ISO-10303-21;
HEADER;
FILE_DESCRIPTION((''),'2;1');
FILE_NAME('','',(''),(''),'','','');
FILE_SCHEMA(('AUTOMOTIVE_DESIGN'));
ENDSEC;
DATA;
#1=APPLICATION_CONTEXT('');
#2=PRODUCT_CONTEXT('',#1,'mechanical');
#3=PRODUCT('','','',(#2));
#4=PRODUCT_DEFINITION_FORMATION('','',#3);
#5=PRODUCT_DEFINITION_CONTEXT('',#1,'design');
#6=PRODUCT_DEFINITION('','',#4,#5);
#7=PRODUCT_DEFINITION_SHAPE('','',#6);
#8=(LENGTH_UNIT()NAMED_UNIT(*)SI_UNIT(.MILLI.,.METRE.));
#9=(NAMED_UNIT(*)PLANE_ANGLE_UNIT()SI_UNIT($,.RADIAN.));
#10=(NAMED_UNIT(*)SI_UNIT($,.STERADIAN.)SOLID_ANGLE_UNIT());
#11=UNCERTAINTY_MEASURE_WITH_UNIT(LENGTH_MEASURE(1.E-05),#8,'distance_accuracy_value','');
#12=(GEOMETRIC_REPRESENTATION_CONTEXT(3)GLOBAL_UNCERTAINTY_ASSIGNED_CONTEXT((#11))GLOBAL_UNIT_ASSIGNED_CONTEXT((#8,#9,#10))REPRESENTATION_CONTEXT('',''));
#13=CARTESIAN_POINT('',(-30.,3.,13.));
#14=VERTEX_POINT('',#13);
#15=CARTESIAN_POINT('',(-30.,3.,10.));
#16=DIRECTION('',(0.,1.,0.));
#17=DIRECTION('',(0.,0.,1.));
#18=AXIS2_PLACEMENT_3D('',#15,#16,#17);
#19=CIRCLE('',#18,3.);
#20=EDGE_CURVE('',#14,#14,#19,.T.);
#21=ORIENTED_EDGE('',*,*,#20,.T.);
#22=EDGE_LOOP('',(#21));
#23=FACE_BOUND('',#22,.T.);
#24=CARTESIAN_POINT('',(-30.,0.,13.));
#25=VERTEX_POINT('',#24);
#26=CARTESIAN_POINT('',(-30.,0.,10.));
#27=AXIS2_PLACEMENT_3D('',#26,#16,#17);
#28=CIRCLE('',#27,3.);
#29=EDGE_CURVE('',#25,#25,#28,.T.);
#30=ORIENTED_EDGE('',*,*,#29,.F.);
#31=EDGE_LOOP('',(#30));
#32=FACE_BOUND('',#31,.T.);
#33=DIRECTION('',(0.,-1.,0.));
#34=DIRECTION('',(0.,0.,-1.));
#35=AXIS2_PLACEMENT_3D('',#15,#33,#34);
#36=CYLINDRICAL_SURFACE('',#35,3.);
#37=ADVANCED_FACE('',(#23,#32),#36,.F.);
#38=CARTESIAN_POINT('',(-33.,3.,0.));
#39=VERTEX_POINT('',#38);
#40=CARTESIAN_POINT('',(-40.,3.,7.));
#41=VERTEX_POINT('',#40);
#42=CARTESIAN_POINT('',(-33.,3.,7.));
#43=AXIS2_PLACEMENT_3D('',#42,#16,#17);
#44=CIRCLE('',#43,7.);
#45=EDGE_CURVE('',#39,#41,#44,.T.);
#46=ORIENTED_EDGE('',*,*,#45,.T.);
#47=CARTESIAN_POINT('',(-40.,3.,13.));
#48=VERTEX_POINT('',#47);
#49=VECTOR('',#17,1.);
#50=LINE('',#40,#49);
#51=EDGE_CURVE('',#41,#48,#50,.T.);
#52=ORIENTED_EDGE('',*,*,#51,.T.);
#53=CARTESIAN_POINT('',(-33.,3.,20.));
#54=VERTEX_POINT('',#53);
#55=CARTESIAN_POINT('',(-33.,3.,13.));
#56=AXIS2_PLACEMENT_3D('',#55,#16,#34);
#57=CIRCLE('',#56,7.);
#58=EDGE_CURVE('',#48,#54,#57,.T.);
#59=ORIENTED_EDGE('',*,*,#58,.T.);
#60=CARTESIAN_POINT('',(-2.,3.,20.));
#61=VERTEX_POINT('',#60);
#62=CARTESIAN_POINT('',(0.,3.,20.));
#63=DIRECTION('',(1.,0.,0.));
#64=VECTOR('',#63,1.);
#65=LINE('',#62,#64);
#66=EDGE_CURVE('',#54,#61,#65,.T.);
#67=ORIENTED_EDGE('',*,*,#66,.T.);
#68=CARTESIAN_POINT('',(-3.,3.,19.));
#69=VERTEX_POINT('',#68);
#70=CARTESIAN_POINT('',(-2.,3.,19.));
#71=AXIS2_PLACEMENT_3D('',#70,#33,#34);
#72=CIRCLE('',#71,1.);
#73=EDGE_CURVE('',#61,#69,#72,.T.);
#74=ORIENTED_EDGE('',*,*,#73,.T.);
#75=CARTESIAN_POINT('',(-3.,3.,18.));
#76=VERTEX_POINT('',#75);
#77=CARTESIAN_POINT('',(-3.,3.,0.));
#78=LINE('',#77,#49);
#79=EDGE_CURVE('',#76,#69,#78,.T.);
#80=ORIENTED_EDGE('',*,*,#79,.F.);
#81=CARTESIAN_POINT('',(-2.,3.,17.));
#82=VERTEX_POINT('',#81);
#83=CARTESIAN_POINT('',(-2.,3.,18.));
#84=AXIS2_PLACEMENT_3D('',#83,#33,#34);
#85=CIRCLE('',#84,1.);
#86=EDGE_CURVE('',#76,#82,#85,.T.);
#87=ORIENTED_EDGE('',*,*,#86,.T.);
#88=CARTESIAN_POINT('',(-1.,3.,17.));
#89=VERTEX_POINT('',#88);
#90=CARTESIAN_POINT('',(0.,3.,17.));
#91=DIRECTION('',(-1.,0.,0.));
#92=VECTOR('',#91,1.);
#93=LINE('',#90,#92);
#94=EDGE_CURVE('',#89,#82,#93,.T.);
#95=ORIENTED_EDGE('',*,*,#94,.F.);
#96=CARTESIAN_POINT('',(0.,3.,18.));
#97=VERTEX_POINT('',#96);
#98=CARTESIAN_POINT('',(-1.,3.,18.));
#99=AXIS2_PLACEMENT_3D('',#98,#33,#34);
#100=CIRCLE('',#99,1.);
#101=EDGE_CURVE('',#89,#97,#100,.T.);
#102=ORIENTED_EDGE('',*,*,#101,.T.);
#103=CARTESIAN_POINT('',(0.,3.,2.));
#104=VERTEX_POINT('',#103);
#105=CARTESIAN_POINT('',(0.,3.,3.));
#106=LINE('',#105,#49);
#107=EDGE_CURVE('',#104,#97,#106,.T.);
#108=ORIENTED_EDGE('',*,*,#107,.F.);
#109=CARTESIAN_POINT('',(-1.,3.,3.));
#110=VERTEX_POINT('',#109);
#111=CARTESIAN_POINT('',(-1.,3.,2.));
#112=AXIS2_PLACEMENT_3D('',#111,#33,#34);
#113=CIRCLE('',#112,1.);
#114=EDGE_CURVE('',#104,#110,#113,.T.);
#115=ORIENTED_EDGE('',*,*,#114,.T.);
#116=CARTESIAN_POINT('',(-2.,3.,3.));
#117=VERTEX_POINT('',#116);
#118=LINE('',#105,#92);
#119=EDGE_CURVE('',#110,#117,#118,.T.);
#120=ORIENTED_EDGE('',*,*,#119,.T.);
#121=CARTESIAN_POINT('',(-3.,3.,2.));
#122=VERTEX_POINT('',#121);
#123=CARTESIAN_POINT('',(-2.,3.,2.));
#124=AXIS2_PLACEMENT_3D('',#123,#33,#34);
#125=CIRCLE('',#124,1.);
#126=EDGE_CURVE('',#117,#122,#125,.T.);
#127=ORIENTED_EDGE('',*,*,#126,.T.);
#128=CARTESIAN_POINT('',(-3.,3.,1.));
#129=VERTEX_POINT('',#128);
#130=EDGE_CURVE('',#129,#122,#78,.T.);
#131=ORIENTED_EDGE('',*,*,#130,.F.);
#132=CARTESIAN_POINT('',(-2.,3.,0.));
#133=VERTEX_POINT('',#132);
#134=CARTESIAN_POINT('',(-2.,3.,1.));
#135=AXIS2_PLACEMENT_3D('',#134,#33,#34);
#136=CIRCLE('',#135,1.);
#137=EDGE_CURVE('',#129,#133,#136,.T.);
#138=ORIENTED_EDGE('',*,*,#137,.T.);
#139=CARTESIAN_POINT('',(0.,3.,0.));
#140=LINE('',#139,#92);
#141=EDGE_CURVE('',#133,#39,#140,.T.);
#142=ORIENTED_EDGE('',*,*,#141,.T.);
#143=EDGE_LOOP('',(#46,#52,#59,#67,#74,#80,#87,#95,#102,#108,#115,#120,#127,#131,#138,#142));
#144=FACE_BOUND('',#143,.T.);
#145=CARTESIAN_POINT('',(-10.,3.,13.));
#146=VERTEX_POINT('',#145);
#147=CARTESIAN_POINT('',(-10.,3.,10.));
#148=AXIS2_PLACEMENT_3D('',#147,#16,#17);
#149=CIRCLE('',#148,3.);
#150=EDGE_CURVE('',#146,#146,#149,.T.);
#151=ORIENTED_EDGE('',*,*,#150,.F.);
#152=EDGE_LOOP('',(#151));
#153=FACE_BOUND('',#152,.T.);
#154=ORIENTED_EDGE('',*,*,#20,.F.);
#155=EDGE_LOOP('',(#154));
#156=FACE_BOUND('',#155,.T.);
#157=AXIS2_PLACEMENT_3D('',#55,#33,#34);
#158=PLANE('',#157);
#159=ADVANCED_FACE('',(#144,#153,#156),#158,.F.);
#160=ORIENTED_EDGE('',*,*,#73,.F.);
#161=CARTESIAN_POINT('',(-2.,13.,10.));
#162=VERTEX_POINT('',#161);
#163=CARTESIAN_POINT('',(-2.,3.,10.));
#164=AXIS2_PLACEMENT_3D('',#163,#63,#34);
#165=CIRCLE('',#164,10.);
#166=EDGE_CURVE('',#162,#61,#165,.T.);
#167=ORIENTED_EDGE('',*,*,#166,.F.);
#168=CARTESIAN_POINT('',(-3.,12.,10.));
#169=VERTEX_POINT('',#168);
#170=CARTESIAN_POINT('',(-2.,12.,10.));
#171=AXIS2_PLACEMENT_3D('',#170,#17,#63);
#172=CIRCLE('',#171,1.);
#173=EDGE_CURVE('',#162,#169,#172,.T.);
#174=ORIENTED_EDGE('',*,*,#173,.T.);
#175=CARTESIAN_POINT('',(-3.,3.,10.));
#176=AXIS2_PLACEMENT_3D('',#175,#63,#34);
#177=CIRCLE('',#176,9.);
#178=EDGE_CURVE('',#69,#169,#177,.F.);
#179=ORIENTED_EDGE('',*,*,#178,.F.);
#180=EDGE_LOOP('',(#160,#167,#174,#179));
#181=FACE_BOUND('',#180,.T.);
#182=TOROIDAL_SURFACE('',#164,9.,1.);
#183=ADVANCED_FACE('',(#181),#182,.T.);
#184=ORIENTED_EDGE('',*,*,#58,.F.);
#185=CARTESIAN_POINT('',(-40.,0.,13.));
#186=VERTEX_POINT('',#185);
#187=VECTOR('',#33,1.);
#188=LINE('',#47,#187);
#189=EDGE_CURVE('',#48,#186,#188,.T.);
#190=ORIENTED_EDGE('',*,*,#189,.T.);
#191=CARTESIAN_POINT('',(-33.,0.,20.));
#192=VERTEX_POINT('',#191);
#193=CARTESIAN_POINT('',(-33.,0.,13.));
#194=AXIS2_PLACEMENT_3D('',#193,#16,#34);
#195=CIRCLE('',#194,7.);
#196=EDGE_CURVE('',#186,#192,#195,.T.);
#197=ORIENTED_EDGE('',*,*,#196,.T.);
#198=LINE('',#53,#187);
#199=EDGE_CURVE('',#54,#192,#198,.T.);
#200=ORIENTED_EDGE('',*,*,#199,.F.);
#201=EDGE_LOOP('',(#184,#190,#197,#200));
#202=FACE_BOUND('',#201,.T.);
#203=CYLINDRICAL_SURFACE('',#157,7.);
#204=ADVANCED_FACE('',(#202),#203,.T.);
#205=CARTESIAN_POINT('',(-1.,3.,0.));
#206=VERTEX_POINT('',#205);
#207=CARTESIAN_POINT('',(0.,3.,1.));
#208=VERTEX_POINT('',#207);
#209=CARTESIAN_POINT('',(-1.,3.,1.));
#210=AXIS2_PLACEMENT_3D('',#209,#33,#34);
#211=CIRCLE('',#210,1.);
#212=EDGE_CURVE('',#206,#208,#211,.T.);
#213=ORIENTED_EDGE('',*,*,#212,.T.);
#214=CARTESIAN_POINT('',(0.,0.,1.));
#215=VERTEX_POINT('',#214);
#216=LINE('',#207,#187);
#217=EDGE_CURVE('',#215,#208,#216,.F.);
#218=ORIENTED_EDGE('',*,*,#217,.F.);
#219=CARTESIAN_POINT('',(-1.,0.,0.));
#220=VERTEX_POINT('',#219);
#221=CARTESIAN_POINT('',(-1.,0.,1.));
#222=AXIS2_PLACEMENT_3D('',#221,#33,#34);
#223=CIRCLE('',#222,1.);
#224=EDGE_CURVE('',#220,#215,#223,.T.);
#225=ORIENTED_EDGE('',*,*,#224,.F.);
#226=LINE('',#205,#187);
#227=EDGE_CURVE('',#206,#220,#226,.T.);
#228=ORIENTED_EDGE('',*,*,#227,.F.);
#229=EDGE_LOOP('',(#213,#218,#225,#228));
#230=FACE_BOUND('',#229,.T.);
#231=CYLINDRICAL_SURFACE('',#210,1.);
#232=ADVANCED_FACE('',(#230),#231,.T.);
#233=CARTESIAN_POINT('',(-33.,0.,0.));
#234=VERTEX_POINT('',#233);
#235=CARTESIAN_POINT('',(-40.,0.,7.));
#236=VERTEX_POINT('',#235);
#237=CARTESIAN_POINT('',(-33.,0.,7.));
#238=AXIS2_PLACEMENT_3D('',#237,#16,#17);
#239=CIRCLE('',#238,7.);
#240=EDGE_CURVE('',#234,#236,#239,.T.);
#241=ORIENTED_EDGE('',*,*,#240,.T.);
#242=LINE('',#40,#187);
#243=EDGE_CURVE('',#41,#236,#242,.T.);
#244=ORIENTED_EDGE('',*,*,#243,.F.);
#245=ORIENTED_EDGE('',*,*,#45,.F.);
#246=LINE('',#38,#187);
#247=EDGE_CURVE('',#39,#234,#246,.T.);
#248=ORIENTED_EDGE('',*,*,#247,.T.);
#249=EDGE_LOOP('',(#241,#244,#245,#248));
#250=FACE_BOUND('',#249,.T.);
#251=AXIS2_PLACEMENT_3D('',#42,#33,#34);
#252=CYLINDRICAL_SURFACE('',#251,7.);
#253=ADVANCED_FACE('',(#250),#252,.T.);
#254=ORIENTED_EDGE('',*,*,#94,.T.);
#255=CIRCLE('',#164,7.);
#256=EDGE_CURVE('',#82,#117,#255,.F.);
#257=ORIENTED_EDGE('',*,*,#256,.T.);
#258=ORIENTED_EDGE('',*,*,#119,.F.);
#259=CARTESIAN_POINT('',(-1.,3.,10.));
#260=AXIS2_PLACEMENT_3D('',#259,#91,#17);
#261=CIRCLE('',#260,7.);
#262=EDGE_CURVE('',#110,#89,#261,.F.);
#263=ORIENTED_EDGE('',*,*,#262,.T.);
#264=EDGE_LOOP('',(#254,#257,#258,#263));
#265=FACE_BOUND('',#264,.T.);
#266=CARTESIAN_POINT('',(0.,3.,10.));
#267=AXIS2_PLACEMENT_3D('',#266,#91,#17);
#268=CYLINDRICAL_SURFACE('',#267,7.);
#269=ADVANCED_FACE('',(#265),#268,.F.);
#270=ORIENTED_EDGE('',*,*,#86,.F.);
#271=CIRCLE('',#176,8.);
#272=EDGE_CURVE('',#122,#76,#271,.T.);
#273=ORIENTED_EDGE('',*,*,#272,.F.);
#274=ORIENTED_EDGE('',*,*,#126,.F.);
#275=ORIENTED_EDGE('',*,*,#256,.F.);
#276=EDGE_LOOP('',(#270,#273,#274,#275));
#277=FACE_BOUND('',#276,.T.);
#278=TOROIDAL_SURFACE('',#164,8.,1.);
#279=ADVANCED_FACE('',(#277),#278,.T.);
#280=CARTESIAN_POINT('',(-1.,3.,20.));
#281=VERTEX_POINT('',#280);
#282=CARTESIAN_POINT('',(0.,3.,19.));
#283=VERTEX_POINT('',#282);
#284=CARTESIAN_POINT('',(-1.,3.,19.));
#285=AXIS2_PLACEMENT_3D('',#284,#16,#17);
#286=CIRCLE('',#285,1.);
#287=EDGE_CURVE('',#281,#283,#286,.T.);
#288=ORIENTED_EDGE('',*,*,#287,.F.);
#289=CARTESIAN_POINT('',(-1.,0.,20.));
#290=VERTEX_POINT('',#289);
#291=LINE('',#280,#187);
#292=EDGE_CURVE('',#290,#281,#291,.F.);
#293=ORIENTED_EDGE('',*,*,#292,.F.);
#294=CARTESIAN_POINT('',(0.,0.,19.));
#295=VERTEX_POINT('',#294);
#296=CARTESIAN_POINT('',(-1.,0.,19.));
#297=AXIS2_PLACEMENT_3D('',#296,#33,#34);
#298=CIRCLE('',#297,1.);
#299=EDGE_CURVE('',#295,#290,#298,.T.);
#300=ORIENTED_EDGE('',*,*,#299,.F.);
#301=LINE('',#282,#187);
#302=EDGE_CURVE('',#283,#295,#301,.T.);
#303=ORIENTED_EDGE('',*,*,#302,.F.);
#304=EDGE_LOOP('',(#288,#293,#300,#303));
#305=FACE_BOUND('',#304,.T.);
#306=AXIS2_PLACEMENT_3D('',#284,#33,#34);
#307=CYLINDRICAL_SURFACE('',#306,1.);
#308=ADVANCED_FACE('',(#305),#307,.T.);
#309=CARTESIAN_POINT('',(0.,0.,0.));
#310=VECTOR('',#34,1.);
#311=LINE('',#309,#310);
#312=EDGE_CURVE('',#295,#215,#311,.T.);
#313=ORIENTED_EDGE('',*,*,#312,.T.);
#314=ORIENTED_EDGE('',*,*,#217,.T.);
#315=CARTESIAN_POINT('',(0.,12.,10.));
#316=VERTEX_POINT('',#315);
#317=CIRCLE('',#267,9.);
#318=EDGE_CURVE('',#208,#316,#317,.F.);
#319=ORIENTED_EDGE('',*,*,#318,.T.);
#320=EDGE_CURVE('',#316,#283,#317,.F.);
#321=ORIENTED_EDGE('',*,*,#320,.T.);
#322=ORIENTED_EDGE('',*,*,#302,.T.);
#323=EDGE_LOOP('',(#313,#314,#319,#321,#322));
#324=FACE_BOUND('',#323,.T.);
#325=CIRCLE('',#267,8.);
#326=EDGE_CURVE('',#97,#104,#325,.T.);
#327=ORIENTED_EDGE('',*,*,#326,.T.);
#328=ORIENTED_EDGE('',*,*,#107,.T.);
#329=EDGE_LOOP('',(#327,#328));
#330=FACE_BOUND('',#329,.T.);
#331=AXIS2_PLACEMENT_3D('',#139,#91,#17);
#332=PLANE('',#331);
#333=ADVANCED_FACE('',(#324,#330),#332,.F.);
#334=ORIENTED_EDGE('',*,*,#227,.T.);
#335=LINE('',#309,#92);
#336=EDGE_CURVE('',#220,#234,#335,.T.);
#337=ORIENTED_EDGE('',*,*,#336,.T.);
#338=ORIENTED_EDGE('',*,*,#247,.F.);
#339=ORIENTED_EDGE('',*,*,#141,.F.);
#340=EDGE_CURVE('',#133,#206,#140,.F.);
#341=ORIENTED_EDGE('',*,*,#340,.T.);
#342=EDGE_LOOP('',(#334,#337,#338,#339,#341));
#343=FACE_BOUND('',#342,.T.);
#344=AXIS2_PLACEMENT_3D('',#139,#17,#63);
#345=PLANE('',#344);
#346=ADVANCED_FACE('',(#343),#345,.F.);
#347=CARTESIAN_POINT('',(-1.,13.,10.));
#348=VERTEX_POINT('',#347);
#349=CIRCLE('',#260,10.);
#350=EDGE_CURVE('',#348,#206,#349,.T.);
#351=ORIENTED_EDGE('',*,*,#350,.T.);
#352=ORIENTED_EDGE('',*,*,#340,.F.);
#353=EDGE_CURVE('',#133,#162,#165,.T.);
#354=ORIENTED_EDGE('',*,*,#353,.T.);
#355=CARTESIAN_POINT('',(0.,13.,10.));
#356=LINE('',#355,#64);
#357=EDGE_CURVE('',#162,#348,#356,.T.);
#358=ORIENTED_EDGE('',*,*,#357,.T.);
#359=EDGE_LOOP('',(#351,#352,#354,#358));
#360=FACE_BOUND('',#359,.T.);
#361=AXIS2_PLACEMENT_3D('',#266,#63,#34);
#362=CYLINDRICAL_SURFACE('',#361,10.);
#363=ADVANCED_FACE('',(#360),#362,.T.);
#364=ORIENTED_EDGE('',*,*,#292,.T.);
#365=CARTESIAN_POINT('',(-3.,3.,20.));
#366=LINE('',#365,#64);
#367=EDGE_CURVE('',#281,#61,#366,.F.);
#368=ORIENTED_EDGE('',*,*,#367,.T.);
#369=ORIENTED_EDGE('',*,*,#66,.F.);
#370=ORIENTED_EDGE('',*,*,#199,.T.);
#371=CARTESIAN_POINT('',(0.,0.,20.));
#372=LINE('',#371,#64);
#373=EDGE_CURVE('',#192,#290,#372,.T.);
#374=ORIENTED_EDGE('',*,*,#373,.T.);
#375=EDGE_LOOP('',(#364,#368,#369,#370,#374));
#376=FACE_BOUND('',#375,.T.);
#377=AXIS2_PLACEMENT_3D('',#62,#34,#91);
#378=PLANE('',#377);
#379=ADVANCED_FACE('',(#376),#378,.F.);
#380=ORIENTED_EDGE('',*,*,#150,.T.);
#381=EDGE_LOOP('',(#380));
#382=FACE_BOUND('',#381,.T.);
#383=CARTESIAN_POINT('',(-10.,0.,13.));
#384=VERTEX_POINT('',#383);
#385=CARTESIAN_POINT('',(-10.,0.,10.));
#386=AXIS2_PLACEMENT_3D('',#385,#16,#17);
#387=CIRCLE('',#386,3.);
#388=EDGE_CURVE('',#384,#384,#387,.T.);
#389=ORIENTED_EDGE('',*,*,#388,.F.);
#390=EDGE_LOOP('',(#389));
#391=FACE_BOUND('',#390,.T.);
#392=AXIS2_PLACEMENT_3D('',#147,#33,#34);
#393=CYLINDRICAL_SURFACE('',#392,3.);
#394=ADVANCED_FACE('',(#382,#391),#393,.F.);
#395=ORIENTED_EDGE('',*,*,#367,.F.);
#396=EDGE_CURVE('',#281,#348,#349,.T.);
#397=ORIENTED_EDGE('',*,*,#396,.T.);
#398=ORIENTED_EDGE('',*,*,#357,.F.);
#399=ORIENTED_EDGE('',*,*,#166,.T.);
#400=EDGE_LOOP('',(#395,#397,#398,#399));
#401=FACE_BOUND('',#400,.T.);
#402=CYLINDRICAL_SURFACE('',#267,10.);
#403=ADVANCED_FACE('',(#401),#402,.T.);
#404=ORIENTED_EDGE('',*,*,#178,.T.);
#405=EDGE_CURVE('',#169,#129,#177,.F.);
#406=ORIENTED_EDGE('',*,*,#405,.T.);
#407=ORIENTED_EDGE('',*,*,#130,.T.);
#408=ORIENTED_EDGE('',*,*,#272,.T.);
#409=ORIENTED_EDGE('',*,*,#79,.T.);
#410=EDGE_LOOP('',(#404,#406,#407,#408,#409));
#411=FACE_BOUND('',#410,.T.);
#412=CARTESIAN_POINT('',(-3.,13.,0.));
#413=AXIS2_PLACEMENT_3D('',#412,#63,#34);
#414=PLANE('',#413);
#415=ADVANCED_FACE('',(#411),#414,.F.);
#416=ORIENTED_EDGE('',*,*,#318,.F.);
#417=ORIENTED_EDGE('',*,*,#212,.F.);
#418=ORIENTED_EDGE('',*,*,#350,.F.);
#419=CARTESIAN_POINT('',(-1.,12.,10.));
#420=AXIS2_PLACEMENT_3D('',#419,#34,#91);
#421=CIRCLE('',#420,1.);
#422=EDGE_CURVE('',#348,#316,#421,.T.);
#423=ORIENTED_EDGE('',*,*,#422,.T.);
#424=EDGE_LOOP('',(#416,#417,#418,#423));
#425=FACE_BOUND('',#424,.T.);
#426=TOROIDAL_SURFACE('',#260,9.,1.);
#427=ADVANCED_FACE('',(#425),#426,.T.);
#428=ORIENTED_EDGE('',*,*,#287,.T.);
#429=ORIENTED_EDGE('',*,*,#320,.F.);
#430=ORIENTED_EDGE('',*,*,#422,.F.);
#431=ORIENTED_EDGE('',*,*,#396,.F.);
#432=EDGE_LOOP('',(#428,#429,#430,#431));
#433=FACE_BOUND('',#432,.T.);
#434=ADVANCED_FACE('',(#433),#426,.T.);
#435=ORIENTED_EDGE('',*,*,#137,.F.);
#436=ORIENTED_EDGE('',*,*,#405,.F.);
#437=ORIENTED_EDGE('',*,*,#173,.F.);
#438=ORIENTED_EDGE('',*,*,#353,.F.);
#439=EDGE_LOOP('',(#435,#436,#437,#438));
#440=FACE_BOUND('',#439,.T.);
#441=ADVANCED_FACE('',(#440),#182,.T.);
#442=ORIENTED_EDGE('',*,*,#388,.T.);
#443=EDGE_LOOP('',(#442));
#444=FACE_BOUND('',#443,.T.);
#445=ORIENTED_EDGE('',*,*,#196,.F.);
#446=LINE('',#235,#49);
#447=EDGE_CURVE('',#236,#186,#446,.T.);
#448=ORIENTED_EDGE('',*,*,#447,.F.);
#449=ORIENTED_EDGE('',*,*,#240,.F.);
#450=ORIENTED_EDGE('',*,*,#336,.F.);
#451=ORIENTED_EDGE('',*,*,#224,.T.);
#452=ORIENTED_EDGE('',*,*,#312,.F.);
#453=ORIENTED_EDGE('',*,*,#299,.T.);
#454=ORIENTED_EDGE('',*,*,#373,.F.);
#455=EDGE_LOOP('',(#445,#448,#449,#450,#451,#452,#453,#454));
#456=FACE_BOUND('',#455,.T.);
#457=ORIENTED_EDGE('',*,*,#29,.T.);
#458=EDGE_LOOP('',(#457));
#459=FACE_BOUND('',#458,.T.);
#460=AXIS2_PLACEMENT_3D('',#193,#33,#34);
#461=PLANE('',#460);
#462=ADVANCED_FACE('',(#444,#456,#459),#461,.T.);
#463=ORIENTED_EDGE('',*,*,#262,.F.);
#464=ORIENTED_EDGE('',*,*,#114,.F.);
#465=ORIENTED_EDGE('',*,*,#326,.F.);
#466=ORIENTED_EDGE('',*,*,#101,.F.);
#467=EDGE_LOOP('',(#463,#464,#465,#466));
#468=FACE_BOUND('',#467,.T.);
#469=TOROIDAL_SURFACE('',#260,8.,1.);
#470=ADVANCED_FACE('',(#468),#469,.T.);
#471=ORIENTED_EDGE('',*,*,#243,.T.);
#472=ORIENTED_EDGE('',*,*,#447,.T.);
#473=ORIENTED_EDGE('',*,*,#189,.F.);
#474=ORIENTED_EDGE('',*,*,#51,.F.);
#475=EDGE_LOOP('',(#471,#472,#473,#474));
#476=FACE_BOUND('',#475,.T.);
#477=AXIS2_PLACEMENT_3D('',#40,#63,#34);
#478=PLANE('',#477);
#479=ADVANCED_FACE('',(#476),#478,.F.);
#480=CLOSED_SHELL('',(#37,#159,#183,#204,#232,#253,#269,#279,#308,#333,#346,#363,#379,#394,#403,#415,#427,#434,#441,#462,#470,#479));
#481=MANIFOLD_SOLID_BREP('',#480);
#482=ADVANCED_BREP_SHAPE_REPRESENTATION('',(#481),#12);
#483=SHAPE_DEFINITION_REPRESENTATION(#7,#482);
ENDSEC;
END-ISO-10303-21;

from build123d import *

# Parameters (mm, degrees)
SKETCH1_R           = 3
BOSS_EXTRUDE1_DEPTH = 3
SKETCH2_W           = 3
SKETCH2_H           = 20
BOSS_EXTRUDE2_DEPTH = 10
FILLET1_R           = 10
CUT_EXTRUDE1_DEPTH  = 45.022721406
FILLET2_R           = 1


with BuildPart() as part:
    # Sketch1 → Boss-Extrude1 (new body)
    with BuildSketch(Plane(origin=(0, 0, 0), x_dir=(1, 0, 0), z_dir=(0, 1, 0))):
        with BuildLine():
            Line((0, 0), (-33, 0))
            ThreePointArc((-33, 0), (-37.949747468, -2.050252532), (-40, -7))
            Line((-40, -7), (-40, -13))
            ThreePointArc((-40, -13), (-37.949747468, -17.949747468), (-33, -20))
            Line((-33, -20), (0, -20))
            Line((0, -20), (0, 0))
        make_face()
        with Locations(Location((-30, -10, 0), (0, 0, 270))):
            Circle(SKETCH1_R, mode=Mode.SUBTRACT)
        with Locations(Location((-10, -10, 0), (0, 0, 270))):
            Circle(SKETCH1_R, mode=Mode.SUBTRACT)
    extrude(amount=BOSS_EXTRUDE1_DEPTH)

    # Sketch2 → Boss-Extrude2 (add)
    with BuildSketch(Plane(origin=(0, 3, 0), x_dir=(1, 0, 0), z_dir=(0, 1, 0))):
        with Locations((-1.5, -10)):
            Rectangle(SKETCH2_W, SKETCH2_H)
    extrude(amount=BOSS_EXTRUDE2_DEPTH)

    # Fillet1
    fillet1_edges = [part.edges().sort_by_distance(p)[0] for p in [
        (-1.5, 13, 0),
        (-1.5, 13, 20),
    ]]
    fillet(fillet1_edges, radius=FILLET1_R - 0.0001)  # a hair under: the kernel refuses the full size

    # Sketch3 → Cut-Extrude1 (cut, through all)
    with BuildSketch(Plane.ZY.offset(3)):
        with BuildLine():
            Line((3, 3), (17, 3))
            ThreePointArc((17, 3), (10, 10), (3, 3))
        make_face()
    extrude(amount=-CUT_EXTRUDE1_DEPTH, mode=Mode.SUBTRACT)

    # Fillet2
    fillet2_edges = [part.edges().sort_by_distance(p)[0] for p in [
        (-3, 10.071097101, 17.071097101),
        (-3, 10.071097101, 2.928902899),
        (0, 1.50005, 0),
        (0, 1.50005, 20),
        (0, 10.071097101, 17.071097101),
        (0, 10.071097101, 2.928902899),
        (0, 10, 10),
        (-3, 10, 10),
    ]]
    fillet(fillet2_edges, radius=FILLET2_R)


solid = part.part
